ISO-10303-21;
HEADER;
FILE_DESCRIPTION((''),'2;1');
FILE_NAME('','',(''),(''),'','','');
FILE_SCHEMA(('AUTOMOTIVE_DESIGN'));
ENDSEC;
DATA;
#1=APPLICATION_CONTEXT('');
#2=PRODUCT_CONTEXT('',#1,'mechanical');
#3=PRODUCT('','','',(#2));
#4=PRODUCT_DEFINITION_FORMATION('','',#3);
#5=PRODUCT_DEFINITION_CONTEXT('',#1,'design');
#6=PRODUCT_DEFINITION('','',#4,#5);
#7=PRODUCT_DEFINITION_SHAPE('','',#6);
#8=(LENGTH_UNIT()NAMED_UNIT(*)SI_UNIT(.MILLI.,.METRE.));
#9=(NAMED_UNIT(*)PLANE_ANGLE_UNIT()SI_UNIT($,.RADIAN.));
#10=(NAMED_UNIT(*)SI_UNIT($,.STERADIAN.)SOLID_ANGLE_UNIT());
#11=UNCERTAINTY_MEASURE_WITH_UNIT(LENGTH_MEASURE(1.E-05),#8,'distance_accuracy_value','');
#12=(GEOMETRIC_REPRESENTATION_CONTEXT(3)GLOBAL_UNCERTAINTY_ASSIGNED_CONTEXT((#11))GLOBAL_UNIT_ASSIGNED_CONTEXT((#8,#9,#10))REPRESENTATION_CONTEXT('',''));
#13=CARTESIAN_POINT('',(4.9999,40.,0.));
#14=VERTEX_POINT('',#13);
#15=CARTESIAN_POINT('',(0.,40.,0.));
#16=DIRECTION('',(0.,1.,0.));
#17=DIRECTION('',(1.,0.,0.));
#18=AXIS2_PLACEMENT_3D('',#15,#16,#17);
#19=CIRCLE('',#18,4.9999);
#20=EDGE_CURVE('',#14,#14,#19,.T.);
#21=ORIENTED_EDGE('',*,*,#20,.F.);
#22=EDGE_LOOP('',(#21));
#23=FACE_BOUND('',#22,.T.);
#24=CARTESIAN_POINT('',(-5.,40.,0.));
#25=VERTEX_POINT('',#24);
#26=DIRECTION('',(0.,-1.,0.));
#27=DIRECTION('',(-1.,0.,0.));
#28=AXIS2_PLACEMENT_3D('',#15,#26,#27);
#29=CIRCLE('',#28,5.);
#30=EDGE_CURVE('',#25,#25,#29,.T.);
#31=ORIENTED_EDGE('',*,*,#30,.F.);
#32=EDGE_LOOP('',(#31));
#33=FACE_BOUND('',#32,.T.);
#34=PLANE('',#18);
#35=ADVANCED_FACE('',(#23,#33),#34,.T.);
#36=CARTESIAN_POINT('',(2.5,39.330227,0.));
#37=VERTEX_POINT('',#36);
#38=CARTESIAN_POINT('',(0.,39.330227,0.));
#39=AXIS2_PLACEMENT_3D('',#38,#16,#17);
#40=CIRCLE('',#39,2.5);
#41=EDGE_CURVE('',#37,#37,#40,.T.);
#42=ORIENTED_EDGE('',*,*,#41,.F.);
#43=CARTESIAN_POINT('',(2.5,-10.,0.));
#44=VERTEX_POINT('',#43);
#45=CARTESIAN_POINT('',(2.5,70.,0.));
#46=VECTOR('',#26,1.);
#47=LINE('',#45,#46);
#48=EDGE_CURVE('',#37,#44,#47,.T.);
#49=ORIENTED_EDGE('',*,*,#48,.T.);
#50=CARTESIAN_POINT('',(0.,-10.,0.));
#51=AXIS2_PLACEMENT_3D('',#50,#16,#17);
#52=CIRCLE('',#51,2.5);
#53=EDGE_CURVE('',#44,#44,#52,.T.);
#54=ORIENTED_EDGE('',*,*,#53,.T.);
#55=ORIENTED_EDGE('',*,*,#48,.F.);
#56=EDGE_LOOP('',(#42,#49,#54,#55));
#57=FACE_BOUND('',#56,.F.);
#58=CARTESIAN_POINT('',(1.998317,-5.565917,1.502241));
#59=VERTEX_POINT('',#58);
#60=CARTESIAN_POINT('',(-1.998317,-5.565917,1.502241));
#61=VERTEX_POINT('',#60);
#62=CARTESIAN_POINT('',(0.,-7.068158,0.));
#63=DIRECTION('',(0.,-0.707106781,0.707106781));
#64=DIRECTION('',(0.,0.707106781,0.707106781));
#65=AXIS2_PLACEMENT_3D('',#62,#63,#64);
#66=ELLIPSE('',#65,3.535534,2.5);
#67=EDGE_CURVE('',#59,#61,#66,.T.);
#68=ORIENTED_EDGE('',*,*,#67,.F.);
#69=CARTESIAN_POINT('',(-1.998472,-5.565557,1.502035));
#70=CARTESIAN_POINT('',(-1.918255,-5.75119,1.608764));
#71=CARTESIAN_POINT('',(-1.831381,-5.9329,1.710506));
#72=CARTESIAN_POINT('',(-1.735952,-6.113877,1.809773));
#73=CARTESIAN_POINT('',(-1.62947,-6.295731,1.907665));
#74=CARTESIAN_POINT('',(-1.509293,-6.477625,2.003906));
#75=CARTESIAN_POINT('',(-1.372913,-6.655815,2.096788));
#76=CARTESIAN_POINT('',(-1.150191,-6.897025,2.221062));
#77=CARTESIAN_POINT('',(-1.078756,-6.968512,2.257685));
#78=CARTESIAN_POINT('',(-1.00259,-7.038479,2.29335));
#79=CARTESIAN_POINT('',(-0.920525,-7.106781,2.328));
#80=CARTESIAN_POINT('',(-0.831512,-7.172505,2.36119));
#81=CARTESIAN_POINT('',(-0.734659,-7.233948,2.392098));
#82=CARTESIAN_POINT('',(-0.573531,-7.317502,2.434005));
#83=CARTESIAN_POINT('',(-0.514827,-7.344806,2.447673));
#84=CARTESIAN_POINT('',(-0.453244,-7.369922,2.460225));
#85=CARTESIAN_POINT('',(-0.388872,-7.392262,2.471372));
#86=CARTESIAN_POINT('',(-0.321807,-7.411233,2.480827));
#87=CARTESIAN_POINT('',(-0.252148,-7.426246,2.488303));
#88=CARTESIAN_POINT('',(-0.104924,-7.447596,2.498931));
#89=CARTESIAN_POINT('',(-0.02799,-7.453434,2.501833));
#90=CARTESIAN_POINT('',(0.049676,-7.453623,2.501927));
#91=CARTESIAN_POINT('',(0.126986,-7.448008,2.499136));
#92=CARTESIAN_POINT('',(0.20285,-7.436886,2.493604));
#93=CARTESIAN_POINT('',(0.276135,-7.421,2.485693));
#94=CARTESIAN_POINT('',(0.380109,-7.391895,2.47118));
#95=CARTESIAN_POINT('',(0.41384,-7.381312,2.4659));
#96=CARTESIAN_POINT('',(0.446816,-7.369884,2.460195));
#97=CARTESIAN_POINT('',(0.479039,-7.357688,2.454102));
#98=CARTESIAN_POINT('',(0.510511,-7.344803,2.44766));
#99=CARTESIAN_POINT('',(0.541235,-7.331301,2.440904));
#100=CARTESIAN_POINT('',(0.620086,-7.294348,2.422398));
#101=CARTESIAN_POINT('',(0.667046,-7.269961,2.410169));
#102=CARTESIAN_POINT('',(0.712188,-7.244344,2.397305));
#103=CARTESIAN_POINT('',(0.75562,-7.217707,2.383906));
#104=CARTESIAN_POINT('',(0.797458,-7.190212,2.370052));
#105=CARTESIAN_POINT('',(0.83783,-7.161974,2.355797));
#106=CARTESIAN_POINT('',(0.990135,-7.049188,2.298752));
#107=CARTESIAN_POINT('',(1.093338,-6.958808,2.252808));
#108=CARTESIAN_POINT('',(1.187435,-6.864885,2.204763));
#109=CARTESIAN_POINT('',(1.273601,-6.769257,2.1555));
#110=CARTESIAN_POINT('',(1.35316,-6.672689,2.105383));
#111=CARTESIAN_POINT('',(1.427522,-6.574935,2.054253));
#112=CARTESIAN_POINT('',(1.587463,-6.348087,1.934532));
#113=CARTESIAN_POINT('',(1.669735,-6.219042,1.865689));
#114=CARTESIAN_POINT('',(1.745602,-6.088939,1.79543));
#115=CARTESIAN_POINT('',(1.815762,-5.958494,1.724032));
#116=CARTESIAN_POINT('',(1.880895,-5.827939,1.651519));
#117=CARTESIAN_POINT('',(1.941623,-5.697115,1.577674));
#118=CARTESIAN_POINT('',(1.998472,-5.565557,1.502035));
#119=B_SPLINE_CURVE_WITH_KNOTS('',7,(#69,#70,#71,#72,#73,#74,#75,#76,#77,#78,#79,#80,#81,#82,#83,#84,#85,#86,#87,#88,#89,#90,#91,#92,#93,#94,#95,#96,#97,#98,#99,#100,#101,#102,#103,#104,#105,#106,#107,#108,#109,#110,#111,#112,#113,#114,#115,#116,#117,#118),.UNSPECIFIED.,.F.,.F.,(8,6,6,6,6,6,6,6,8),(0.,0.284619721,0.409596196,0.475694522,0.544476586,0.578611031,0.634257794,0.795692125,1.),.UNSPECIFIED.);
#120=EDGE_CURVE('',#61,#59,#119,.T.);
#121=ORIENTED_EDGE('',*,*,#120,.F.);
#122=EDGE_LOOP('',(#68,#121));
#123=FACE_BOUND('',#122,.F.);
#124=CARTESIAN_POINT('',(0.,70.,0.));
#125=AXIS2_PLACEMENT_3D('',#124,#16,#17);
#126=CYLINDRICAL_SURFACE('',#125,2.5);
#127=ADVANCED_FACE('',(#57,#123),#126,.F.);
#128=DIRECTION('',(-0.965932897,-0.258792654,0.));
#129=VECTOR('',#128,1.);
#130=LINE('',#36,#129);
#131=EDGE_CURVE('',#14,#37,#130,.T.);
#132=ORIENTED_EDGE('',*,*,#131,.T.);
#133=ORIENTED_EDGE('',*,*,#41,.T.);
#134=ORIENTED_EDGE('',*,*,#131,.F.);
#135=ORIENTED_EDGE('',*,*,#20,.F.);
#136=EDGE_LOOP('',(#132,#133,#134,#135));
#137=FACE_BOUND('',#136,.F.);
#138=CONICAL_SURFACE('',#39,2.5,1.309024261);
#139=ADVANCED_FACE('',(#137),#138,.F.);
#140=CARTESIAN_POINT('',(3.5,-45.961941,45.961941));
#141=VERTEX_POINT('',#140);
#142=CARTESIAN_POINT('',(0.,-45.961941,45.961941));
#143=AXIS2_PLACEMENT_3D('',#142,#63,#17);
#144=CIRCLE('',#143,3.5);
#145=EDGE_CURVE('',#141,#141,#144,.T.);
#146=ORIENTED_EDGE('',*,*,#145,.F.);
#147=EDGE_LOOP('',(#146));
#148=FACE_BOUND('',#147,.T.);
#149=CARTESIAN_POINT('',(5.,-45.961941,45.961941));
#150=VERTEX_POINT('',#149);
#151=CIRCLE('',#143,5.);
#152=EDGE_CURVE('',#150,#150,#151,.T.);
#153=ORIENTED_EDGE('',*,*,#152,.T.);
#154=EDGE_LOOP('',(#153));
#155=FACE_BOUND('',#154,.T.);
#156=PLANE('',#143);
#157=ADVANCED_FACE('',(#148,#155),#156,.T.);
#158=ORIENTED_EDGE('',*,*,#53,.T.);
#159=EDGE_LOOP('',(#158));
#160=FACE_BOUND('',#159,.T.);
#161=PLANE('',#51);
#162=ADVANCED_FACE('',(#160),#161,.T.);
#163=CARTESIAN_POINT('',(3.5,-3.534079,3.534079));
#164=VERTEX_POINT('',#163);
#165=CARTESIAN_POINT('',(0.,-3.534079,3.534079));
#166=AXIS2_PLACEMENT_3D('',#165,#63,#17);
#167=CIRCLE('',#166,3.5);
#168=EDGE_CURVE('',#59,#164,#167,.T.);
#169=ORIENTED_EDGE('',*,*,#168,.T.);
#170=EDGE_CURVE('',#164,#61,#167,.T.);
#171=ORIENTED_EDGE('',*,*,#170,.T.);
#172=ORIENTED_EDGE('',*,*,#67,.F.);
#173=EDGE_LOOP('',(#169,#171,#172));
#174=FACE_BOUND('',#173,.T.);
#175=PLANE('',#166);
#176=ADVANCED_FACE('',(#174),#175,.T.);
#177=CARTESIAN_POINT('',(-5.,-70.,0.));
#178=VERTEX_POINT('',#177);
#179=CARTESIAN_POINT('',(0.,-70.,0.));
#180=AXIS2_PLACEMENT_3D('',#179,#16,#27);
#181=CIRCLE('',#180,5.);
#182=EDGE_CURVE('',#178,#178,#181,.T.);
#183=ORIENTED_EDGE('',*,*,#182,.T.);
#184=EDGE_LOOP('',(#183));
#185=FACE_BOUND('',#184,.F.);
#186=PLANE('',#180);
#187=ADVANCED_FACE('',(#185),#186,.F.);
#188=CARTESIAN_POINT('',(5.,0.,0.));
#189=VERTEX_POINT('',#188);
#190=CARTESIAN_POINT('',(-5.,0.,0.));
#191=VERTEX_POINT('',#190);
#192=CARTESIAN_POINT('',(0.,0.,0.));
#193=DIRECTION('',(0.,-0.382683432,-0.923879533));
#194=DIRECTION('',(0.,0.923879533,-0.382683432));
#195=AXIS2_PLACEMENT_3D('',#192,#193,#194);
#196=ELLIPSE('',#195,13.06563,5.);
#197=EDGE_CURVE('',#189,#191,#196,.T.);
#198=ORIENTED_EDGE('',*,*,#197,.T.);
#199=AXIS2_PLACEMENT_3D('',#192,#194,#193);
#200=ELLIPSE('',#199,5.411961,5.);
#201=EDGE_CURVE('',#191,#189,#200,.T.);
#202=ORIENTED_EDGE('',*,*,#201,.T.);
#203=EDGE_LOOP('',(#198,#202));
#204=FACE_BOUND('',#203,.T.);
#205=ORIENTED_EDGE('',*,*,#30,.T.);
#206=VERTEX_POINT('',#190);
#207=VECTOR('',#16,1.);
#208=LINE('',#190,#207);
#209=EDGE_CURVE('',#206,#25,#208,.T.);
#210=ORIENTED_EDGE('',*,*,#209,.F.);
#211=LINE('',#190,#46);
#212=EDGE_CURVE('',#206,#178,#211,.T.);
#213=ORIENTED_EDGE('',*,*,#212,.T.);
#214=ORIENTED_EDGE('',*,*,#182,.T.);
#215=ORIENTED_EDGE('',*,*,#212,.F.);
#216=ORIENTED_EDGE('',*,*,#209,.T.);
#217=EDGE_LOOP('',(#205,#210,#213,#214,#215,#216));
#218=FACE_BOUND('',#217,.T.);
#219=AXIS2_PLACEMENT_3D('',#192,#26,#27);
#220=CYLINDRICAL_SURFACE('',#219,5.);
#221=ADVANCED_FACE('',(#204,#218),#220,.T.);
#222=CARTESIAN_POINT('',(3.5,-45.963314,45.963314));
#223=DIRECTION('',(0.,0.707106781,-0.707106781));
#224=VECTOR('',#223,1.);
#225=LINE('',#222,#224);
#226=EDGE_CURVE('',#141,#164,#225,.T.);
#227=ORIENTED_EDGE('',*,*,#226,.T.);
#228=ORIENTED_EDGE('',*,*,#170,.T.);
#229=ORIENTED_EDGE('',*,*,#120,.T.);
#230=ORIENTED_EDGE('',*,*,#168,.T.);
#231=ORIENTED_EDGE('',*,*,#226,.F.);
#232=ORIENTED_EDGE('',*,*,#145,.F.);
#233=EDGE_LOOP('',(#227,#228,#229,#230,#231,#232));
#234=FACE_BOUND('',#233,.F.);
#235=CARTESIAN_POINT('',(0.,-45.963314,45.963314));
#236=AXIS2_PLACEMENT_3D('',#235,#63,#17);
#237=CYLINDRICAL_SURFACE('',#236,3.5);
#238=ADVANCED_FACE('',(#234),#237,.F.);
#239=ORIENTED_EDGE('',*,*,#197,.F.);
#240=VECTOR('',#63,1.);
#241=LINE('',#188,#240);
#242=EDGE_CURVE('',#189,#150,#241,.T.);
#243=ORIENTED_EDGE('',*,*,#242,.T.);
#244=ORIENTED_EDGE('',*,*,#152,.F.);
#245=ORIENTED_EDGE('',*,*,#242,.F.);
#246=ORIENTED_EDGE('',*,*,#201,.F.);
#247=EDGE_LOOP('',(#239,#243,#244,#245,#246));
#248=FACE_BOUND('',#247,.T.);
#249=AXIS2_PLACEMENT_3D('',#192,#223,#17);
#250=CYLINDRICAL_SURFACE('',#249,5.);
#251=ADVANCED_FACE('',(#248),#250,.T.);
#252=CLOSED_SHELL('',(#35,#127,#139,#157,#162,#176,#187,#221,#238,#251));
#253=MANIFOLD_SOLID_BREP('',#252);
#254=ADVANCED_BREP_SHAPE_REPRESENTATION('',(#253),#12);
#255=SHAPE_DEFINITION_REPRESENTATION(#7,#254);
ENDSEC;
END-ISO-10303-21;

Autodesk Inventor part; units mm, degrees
ref_plane "YZ Plane" through (0, 0, 0) normal (1, 0, 0) x (0, 1, 0)
ref_plane "XZ Plane" through (0, 0, 0) normal (0, 1, 0) x (-1, 0, 0)
ref_plane "XY Plane" through (0, 0, 0) normal (0, 0, 1) x (1, 0, 0)
ref_plane "Płaszczyzna konstrukcyjna9" through (0, 0, 0) normal (0, -0.7071068, 0.7071068) x (1, 0, 0)
sketch "Szkic5" plane through (0, 0, 0) normal (0, -0.7071068, 0.7071068) x (1, 0, 0)
  circle A0 centre (0, 0) radius 5
  dimension "d1" = 10
extrude "Wyciągnięcie proste1" add sketch "Szkic5" along normal blind 65
sketch "Szkic6" plane through (0, 0, 0) normal (0, 1, 0) x (-1, 0, 0)
  circle A0 centre (0, 0) radius 5
  dimension "d4" = 10
extrude "Wyciągnięcie proste2" add sketch "Szkic6" along normal mid plane 140
sketch "Szkic8" plane through (0, -45.9619, 45.9619) normal (0, -0.7071068, 0.7071068) x (1, 0, 0)
  circle A0 centre (0, 0) radius 5 projected
  circle A1 centre (0, 0) radius 3.5
  dimension "d8" = 7
extrude "Wyciągnięcie proste3" cut sketch "Szkic8" against normal blind 60 contours A1
sketch "Szkic9" plane through (0, 70, 0) normal (0, 1, 0) x (1, 0, 0)
  circle A0 centre (0, 0) radius 2.5
  dimension "d11" = 5
extrude "Wyciągnięcie proste4" cut sketch "Szkic9" against normal blind 80
sketch "Szkic10" plane through (0, 70, 0) normal (0, 1, 0) x (1, 0, 0)
  arc A0 (-5, 0) -> (5, 0) centre (0, 0) ccw projected
  circle A1 centre (0, 0) radius 5
  point P0 (5, 0)
  dimension "d14" = 10
extrude "Wyciągnięcie proste5" cut sketch "Szkic10" against normal blind 30
chamfer "Faza1" distance 2.5 angle 15 1 edges at (-2.5, 40, 0) measured on face at (-4.094, 40, 0.5983)
properties part number "rurka"
